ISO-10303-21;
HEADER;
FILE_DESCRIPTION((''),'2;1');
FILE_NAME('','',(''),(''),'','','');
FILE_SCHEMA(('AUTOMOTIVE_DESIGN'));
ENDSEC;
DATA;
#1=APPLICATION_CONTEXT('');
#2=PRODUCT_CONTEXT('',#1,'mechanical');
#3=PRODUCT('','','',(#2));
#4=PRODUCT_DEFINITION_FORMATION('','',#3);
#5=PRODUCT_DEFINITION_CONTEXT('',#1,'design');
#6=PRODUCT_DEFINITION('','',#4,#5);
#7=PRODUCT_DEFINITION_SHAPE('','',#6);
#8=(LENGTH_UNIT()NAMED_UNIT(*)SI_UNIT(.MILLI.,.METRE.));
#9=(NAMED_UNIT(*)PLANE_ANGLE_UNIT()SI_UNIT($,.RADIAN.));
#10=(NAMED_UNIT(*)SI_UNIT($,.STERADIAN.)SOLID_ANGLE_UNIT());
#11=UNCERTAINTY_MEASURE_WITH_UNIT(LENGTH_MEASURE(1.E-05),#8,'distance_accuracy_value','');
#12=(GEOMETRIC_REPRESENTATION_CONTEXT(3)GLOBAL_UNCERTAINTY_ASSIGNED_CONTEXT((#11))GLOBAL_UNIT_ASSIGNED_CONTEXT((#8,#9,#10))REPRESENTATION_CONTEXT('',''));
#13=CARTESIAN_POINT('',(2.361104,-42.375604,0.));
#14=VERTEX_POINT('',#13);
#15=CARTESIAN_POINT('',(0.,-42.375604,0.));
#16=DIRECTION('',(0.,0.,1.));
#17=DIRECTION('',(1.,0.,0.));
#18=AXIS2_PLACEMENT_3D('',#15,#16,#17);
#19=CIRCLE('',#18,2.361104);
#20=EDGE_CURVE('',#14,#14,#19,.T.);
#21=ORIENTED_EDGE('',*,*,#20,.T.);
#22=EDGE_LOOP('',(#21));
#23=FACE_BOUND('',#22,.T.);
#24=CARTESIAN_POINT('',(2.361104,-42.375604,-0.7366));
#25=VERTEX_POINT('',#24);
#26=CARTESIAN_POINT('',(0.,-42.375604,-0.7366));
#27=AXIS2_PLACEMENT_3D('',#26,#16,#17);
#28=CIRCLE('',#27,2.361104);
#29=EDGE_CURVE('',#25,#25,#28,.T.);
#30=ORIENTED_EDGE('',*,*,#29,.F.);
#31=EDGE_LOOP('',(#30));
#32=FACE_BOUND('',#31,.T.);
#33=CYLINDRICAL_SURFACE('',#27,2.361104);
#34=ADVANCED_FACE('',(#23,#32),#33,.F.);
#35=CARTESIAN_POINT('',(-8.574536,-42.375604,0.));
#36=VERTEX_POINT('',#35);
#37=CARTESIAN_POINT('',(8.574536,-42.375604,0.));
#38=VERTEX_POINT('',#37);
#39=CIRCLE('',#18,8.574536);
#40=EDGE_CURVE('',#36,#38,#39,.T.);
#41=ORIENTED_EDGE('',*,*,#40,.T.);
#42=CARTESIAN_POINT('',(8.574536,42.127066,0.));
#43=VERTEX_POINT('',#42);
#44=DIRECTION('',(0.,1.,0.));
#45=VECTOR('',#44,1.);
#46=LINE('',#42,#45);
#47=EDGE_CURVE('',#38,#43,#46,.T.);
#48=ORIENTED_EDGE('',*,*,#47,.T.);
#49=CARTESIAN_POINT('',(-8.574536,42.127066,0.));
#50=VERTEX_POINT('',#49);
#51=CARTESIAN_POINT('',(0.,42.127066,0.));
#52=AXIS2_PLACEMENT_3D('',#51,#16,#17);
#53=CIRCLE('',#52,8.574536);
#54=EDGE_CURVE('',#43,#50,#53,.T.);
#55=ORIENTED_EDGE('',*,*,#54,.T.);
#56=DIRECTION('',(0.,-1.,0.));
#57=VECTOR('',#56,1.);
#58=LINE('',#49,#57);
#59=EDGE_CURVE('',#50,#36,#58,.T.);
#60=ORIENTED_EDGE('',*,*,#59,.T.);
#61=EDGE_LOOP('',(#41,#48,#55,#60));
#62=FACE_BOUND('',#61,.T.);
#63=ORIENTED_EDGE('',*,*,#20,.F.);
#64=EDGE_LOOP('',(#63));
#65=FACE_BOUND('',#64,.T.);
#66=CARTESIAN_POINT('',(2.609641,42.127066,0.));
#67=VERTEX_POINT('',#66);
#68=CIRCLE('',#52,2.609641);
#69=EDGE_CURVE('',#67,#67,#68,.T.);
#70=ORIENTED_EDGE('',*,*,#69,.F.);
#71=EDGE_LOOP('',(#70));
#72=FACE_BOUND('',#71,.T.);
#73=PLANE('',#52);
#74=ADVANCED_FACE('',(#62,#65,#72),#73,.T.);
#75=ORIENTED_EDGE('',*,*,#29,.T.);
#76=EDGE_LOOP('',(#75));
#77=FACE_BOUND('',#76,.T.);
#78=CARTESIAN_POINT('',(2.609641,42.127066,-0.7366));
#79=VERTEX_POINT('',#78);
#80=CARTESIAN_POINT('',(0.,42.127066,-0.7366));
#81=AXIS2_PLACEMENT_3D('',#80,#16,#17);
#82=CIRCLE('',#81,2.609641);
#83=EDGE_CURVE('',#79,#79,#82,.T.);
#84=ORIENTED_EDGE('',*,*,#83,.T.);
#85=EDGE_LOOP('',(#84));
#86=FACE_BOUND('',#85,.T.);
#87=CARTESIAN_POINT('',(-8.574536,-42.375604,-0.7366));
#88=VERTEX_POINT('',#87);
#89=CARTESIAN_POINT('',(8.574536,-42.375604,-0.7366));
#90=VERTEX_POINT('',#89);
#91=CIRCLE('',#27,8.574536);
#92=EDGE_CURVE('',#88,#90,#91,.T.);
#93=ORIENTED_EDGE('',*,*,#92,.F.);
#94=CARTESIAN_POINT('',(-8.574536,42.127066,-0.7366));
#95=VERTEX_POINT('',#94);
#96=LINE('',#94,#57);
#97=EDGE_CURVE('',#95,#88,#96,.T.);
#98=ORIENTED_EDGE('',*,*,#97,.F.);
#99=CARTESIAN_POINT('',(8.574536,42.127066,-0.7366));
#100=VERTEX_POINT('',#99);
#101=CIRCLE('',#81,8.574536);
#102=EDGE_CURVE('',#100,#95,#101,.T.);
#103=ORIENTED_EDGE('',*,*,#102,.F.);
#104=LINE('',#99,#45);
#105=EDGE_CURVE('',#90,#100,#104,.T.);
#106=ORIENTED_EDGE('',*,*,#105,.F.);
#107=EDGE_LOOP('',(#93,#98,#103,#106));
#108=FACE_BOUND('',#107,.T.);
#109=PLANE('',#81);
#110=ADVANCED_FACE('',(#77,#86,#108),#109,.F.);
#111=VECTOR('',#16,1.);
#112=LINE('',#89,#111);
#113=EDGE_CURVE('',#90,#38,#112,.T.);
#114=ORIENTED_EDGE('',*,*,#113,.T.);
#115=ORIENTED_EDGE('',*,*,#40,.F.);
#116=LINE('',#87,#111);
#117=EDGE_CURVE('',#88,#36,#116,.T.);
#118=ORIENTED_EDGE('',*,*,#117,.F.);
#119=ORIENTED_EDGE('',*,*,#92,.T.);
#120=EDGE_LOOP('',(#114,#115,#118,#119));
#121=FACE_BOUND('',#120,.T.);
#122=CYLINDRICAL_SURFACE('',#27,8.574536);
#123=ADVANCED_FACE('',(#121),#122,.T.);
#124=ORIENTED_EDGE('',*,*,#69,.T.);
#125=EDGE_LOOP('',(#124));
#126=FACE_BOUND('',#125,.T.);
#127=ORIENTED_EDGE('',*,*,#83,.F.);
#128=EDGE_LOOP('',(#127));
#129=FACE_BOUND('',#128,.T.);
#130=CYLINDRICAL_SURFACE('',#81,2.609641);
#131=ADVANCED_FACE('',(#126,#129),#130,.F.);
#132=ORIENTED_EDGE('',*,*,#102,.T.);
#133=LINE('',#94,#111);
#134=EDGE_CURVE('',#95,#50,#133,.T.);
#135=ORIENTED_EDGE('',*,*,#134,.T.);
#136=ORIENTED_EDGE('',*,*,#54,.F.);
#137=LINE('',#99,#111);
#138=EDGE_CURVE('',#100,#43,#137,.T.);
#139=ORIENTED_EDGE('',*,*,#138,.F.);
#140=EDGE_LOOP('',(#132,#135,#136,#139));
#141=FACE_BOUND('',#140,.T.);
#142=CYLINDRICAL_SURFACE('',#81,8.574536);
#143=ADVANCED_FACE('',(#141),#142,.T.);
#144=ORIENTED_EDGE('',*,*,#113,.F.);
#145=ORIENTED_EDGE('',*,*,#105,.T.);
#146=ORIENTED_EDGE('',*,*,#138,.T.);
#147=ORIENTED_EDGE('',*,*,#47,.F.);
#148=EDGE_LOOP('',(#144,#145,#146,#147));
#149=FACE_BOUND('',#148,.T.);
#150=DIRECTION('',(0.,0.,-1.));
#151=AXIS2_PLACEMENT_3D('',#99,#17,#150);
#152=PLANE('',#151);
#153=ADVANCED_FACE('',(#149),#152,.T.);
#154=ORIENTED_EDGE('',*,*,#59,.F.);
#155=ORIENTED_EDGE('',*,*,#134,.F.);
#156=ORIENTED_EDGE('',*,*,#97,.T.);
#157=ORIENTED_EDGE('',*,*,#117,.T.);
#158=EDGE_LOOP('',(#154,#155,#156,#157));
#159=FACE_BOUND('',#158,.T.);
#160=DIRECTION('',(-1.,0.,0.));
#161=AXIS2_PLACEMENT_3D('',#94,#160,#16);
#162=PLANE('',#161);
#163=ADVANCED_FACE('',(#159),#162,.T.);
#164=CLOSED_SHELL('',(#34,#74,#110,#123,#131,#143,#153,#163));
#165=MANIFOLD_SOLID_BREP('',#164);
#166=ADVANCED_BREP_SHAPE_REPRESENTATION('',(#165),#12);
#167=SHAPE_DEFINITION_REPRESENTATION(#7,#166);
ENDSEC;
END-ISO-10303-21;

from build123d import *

# Parameters (mm, degrees)
SKETCH1_R          = 2.609641274
SKETCH1_R_2        = 2.36110401
BASE_FLANGE1_DEPTH = 0.7366


# Sheet-metal steps are written as plain solids
with BuildPart() as part:
    # Sketch1 → Base-Flange1 (new body)
    with BuildSketch(Plane.XY):
        with BuildLine():
            Line((8.574535615, 42.127066284), (8.574535615, -42.375603548))
            ThreePointArc((8.574535615, -42.375603548), (0, -50.950139164), (-8.574535615, -42.375603548))
            Line((-8.574535615, -42.375603548), (-8.574535615, 42.127066284))
            ThreePointArc((-8.574535615, 42.127066284), (0, 50.701601899), (8.574535615, 42.127066284))
        make_face()
        with Locations((0, 42.127066284)):
            Circle(SKETCH1_R, mode=Mode.SUBTRACT)
        with Locations((0, -42.375603548)):
            Circle(SKETCH1_R_2, mode=Mode.SUBTRACT)
    extrude(amount=-BASE_FLANGE1_DEPTH)


solid = part.part
